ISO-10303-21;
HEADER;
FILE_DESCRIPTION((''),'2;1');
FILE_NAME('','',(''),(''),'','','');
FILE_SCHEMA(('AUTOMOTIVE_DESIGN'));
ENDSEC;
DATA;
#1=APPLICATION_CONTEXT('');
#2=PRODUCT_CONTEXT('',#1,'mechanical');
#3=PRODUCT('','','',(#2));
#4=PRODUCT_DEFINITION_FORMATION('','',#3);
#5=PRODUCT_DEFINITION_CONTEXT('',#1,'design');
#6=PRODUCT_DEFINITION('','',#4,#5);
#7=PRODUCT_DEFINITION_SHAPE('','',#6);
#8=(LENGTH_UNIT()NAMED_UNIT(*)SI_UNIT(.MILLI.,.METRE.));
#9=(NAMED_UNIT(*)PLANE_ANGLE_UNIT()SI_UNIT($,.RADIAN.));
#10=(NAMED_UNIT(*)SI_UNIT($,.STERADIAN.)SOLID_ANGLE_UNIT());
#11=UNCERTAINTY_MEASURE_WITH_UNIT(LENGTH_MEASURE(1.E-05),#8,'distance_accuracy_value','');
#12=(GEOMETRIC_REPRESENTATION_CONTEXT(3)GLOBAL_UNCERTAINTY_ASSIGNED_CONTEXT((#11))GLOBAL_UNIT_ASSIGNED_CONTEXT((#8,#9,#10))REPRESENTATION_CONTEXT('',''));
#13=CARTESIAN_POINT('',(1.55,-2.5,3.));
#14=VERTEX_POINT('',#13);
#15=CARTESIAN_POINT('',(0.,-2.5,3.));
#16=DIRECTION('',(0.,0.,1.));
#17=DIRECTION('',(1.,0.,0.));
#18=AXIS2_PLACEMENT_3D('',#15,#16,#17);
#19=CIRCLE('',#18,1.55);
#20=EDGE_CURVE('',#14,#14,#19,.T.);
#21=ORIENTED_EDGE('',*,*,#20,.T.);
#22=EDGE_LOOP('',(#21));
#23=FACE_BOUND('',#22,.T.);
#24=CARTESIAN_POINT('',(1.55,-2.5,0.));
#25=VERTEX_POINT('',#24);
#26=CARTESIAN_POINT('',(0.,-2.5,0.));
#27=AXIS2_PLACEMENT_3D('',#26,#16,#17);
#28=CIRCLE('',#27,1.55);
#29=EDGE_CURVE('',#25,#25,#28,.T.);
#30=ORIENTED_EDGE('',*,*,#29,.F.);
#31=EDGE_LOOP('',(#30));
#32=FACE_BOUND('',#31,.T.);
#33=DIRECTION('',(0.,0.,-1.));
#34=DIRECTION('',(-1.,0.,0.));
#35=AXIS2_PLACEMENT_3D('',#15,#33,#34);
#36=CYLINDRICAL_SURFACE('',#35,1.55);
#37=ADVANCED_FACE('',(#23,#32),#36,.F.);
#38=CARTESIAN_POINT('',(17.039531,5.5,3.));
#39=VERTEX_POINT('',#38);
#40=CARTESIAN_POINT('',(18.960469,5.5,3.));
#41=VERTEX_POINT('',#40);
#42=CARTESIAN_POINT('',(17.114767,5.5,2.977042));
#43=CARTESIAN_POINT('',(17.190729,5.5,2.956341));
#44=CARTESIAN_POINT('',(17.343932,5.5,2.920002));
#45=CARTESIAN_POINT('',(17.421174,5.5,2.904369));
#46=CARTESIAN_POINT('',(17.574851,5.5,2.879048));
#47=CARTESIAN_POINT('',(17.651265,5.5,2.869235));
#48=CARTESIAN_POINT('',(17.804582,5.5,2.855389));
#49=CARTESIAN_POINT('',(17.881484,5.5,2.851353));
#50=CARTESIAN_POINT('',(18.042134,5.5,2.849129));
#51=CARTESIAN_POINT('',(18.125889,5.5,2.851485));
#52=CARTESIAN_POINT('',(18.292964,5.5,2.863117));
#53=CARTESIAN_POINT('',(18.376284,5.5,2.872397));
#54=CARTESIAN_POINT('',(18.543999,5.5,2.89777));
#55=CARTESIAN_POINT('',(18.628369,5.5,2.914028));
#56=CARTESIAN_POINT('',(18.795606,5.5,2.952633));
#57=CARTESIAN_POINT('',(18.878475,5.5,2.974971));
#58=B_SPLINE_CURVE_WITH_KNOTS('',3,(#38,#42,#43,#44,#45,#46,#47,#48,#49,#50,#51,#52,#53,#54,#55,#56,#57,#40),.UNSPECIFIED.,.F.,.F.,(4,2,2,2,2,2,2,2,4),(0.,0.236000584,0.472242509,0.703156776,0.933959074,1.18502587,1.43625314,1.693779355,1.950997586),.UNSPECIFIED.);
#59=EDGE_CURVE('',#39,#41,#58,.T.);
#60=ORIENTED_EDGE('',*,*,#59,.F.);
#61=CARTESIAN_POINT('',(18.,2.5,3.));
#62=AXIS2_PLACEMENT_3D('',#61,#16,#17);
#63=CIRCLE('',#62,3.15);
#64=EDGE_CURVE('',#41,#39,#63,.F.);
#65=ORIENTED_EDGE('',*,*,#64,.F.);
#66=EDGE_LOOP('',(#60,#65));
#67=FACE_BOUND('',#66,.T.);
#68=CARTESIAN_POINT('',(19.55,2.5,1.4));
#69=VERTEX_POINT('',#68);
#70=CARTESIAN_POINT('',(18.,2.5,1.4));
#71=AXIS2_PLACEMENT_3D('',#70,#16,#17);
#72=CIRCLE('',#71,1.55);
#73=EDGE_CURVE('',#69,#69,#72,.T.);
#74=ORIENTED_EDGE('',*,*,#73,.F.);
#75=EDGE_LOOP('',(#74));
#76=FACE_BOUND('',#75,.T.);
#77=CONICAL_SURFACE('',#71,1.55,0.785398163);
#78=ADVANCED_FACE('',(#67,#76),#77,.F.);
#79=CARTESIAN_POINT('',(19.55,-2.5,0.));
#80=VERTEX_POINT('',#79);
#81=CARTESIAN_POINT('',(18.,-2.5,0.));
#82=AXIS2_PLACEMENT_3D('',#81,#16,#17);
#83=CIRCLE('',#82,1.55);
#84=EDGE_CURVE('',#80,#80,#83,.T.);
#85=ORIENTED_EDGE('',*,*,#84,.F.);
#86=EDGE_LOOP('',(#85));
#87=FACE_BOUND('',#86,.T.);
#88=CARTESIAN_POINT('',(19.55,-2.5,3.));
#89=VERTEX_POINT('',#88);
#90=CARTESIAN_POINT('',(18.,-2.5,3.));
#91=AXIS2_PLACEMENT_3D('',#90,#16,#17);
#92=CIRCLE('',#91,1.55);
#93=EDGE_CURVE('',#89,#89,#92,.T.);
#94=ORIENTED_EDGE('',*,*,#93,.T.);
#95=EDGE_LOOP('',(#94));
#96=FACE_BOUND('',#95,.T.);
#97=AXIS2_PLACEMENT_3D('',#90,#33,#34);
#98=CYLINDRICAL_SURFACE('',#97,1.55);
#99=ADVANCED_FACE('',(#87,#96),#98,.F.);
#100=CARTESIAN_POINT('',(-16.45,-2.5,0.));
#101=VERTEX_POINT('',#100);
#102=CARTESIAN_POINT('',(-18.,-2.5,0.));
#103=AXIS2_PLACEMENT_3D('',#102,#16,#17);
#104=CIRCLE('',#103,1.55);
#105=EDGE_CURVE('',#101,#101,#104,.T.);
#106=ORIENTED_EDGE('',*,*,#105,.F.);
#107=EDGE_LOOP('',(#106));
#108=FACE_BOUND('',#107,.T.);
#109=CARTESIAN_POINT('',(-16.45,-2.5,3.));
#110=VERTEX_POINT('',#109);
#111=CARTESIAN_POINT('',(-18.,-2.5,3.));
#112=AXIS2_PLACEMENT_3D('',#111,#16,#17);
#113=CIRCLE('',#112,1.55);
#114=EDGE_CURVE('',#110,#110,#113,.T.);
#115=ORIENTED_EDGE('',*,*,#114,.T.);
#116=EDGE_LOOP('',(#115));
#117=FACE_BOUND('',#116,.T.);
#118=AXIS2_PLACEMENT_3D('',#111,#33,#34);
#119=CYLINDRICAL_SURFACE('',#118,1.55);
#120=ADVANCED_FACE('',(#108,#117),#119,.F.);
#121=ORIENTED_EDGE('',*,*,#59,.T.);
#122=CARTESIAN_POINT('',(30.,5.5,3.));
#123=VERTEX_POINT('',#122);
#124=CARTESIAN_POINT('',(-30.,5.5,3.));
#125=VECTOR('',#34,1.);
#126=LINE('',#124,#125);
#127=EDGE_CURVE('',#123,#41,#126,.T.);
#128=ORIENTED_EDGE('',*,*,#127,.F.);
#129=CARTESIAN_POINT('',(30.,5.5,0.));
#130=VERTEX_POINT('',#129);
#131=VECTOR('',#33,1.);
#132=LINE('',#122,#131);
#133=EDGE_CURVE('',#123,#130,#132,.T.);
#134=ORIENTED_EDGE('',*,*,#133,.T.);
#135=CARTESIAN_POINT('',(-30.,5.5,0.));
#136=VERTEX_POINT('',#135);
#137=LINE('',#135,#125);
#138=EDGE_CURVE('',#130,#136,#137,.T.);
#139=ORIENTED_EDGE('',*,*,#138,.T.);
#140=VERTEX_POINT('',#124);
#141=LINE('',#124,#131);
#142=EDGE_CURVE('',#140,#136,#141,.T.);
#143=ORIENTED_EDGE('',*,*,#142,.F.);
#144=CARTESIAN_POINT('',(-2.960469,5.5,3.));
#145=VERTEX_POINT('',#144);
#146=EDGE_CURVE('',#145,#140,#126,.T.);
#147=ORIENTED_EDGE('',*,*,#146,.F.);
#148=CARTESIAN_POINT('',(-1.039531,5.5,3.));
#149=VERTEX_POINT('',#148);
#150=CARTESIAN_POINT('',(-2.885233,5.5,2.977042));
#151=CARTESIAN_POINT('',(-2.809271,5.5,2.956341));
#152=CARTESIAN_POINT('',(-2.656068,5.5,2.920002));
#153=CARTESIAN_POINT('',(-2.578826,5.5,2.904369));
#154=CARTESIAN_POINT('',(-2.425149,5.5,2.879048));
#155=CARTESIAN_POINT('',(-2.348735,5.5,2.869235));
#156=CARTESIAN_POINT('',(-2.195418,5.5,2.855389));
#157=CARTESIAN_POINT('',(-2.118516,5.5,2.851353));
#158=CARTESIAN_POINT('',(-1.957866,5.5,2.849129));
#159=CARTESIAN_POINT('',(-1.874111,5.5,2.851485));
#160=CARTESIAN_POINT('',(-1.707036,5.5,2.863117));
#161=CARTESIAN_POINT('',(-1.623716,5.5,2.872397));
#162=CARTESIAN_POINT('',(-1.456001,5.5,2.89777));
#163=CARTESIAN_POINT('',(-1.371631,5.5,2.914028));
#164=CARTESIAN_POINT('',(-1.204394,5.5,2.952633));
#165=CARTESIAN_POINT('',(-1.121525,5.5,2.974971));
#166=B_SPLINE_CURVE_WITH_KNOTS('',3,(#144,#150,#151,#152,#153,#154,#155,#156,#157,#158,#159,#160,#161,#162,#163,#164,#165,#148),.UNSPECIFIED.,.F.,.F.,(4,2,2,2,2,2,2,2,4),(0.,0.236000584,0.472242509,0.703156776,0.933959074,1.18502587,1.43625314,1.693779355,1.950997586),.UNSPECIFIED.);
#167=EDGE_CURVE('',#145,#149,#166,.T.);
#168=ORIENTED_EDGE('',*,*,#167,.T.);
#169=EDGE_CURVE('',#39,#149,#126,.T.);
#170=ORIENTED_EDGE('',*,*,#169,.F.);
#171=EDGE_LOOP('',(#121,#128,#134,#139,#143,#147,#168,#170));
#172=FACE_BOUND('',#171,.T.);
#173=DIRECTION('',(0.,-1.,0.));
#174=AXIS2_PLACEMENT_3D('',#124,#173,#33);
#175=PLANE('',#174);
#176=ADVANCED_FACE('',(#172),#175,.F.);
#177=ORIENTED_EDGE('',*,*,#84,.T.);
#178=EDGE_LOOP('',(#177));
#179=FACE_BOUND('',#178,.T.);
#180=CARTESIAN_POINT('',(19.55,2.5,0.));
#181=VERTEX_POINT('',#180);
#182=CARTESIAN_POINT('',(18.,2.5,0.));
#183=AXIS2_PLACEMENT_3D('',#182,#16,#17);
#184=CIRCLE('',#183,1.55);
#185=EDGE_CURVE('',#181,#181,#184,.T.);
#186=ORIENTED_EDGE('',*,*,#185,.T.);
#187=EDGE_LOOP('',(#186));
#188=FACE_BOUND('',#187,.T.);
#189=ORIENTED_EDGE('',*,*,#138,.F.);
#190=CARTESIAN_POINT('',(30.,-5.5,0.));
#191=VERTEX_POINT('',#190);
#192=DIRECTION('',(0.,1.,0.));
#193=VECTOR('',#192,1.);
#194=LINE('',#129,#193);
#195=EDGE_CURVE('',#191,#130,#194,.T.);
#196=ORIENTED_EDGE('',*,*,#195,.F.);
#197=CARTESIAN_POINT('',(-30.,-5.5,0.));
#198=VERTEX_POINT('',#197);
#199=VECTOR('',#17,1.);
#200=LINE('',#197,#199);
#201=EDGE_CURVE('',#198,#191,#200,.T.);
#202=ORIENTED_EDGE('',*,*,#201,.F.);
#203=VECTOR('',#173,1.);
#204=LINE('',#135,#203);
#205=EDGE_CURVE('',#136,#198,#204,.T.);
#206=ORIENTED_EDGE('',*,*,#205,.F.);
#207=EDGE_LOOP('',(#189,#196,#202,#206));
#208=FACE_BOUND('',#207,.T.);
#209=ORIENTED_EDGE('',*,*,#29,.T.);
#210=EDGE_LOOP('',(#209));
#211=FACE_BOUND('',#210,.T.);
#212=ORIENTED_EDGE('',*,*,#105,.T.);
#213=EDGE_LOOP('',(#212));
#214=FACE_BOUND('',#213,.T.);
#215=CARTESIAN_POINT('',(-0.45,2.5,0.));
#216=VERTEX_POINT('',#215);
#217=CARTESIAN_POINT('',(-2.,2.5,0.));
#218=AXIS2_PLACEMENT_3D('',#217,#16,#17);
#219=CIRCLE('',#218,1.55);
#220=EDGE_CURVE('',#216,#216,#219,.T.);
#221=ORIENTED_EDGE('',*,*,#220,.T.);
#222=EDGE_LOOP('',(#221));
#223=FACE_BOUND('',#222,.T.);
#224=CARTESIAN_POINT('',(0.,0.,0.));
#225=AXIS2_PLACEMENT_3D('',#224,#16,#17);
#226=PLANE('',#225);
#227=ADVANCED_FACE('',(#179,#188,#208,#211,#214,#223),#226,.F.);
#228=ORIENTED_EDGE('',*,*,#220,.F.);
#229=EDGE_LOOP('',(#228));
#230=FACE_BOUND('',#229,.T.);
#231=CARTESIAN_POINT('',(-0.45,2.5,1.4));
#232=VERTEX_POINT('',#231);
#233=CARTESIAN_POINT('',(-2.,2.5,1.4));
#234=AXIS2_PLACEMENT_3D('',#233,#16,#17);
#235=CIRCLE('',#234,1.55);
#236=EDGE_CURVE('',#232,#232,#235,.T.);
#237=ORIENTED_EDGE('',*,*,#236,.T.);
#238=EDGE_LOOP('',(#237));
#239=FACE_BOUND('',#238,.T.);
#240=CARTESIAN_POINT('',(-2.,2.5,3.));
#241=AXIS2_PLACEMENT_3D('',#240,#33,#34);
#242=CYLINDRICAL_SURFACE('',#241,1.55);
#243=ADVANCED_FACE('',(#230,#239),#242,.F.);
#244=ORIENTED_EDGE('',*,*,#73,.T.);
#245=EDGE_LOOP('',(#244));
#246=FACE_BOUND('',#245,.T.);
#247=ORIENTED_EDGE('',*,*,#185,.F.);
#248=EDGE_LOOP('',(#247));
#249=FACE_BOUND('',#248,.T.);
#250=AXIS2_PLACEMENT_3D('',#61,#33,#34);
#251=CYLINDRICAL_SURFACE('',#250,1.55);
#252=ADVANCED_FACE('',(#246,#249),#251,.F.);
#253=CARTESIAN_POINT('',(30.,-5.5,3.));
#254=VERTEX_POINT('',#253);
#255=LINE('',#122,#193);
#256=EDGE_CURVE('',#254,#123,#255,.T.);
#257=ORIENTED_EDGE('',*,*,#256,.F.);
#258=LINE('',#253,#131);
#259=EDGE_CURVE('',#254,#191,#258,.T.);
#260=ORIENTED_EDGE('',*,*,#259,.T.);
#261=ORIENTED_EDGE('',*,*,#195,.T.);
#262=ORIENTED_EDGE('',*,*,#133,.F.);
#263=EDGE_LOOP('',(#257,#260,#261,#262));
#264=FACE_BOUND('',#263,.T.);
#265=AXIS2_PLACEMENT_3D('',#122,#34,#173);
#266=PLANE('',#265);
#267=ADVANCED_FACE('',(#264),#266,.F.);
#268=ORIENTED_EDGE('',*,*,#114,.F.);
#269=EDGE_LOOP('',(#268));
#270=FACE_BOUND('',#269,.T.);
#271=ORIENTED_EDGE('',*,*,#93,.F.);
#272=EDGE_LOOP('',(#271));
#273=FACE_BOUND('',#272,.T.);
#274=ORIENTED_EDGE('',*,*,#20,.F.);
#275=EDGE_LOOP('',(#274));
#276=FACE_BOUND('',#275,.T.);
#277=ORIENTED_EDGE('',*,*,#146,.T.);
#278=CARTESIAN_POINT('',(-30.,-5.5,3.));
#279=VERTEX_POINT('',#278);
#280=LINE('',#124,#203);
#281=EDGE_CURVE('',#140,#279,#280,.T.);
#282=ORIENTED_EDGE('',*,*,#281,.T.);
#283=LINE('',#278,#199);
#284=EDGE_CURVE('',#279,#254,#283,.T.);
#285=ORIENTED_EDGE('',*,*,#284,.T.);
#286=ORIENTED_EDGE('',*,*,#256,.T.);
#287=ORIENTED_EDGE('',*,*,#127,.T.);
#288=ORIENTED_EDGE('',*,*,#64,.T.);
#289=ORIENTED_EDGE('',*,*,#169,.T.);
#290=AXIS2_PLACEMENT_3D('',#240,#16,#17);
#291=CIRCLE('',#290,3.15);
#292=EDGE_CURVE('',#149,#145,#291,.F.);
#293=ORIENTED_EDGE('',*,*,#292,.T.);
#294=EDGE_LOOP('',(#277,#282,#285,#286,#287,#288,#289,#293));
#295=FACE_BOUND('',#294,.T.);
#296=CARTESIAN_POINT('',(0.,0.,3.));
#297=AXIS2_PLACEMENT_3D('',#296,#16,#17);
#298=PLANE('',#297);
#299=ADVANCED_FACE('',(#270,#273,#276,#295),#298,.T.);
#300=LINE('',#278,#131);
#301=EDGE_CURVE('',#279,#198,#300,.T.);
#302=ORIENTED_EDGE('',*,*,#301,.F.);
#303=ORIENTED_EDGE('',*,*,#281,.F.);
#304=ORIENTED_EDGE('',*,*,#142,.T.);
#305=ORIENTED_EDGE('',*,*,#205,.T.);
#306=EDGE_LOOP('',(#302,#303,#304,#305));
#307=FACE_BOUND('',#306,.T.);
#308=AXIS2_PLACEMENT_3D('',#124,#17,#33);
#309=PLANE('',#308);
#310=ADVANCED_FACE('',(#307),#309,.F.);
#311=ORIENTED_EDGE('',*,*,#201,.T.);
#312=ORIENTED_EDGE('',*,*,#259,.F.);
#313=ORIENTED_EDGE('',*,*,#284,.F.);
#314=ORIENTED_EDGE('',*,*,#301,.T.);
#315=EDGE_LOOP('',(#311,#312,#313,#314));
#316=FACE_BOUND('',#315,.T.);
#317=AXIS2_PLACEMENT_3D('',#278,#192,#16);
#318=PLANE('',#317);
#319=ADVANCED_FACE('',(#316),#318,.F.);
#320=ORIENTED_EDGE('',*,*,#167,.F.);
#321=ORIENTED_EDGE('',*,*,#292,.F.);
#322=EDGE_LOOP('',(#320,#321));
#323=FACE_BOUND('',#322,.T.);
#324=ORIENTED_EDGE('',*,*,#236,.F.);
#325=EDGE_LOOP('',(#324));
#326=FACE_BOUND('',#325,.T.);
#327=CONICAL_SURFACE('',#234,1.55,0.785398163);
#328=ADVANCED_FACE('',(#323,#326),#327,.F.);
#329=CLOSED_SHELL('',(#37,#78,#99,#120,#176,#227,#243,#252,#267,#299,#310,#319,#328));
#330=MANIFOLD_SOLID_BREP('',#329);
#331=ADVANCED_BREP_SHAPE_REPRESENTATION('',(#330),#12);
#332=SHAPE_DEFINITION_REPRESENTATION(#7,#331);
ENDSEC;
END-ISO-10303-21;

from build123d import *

# Parameters (mm, degrees)
SKETCH_1_W      = 60
SKETCH_1_H      = 11
SKETCH_1_R      = 1.55
EXTRUDE_1_DEPTH = 3
CHAMFER_1_SIZE  = 1.6


with BuildPart() as part:
    # 草图1 → 凸台-拉伸1 (new body)
    with BuildSketch(Plane.XY):
        Rectangle(SKETCH_1_W, SKETCH_1_H)
        with Locations((18, 2.5)):
            Circle(SKETCH_1_R, mode=Mode.SUBTRACT)
        with Locations((-2, 2.5)):
            Circle(SKETCH_1_R, mode=Mode.SUBTRACT)
        with Locations((0, -2.5)):
            Circle(SKETCH_1_R, mode=Mode.SUBTRACT)
        with Locations((18, -2.5)):
            Circle(SKETCH_1_R, mode=Mode.SUBTRACT)
        with Locations((-18, -2.5)):
            Circle(SKETCH_1_R, mode=Mode.SUBTRACT)
    extrude(amount=EXTRUDE_1_DEPTH)

    # 倒角1
    # the kernel refuses this chamfer: 1.6 mm, written as the material it takes off along each edge
    with BuildSketch(Plane(origin=(18, 2.5, 3), x_dir=(1, 0, 0), z_dir=(0, -1, 0))) as chamfer_1_piece_1:
        Polygon((1.55, -CHAMFER_1_SIZE), (1.55 + CHAMFER_1_SIZE, 0), (1.55, 0), align=None)
    revolve(axis=Axis((18, 2.5, 3), (0, 0, 1)), mode=Mode.SUBTRACT)
    with BuildSketch(Plane(origin=(-2, 2.5, 3), x_dir=(1, 0, 0), z_dir=(0, -1, 0))) as chamfer_1_piece_2:
        Polygon((1.55, -CHAMFER_1_SIZE), (1.55 + CHAMFER_1_SIZE, 0), (1.55, 0), align=None)
    revolve(axis=Axis((-2, 2.5, 3), (0, 0, 1)), mode=Mode.SUBTRACT)


solid = part.part
